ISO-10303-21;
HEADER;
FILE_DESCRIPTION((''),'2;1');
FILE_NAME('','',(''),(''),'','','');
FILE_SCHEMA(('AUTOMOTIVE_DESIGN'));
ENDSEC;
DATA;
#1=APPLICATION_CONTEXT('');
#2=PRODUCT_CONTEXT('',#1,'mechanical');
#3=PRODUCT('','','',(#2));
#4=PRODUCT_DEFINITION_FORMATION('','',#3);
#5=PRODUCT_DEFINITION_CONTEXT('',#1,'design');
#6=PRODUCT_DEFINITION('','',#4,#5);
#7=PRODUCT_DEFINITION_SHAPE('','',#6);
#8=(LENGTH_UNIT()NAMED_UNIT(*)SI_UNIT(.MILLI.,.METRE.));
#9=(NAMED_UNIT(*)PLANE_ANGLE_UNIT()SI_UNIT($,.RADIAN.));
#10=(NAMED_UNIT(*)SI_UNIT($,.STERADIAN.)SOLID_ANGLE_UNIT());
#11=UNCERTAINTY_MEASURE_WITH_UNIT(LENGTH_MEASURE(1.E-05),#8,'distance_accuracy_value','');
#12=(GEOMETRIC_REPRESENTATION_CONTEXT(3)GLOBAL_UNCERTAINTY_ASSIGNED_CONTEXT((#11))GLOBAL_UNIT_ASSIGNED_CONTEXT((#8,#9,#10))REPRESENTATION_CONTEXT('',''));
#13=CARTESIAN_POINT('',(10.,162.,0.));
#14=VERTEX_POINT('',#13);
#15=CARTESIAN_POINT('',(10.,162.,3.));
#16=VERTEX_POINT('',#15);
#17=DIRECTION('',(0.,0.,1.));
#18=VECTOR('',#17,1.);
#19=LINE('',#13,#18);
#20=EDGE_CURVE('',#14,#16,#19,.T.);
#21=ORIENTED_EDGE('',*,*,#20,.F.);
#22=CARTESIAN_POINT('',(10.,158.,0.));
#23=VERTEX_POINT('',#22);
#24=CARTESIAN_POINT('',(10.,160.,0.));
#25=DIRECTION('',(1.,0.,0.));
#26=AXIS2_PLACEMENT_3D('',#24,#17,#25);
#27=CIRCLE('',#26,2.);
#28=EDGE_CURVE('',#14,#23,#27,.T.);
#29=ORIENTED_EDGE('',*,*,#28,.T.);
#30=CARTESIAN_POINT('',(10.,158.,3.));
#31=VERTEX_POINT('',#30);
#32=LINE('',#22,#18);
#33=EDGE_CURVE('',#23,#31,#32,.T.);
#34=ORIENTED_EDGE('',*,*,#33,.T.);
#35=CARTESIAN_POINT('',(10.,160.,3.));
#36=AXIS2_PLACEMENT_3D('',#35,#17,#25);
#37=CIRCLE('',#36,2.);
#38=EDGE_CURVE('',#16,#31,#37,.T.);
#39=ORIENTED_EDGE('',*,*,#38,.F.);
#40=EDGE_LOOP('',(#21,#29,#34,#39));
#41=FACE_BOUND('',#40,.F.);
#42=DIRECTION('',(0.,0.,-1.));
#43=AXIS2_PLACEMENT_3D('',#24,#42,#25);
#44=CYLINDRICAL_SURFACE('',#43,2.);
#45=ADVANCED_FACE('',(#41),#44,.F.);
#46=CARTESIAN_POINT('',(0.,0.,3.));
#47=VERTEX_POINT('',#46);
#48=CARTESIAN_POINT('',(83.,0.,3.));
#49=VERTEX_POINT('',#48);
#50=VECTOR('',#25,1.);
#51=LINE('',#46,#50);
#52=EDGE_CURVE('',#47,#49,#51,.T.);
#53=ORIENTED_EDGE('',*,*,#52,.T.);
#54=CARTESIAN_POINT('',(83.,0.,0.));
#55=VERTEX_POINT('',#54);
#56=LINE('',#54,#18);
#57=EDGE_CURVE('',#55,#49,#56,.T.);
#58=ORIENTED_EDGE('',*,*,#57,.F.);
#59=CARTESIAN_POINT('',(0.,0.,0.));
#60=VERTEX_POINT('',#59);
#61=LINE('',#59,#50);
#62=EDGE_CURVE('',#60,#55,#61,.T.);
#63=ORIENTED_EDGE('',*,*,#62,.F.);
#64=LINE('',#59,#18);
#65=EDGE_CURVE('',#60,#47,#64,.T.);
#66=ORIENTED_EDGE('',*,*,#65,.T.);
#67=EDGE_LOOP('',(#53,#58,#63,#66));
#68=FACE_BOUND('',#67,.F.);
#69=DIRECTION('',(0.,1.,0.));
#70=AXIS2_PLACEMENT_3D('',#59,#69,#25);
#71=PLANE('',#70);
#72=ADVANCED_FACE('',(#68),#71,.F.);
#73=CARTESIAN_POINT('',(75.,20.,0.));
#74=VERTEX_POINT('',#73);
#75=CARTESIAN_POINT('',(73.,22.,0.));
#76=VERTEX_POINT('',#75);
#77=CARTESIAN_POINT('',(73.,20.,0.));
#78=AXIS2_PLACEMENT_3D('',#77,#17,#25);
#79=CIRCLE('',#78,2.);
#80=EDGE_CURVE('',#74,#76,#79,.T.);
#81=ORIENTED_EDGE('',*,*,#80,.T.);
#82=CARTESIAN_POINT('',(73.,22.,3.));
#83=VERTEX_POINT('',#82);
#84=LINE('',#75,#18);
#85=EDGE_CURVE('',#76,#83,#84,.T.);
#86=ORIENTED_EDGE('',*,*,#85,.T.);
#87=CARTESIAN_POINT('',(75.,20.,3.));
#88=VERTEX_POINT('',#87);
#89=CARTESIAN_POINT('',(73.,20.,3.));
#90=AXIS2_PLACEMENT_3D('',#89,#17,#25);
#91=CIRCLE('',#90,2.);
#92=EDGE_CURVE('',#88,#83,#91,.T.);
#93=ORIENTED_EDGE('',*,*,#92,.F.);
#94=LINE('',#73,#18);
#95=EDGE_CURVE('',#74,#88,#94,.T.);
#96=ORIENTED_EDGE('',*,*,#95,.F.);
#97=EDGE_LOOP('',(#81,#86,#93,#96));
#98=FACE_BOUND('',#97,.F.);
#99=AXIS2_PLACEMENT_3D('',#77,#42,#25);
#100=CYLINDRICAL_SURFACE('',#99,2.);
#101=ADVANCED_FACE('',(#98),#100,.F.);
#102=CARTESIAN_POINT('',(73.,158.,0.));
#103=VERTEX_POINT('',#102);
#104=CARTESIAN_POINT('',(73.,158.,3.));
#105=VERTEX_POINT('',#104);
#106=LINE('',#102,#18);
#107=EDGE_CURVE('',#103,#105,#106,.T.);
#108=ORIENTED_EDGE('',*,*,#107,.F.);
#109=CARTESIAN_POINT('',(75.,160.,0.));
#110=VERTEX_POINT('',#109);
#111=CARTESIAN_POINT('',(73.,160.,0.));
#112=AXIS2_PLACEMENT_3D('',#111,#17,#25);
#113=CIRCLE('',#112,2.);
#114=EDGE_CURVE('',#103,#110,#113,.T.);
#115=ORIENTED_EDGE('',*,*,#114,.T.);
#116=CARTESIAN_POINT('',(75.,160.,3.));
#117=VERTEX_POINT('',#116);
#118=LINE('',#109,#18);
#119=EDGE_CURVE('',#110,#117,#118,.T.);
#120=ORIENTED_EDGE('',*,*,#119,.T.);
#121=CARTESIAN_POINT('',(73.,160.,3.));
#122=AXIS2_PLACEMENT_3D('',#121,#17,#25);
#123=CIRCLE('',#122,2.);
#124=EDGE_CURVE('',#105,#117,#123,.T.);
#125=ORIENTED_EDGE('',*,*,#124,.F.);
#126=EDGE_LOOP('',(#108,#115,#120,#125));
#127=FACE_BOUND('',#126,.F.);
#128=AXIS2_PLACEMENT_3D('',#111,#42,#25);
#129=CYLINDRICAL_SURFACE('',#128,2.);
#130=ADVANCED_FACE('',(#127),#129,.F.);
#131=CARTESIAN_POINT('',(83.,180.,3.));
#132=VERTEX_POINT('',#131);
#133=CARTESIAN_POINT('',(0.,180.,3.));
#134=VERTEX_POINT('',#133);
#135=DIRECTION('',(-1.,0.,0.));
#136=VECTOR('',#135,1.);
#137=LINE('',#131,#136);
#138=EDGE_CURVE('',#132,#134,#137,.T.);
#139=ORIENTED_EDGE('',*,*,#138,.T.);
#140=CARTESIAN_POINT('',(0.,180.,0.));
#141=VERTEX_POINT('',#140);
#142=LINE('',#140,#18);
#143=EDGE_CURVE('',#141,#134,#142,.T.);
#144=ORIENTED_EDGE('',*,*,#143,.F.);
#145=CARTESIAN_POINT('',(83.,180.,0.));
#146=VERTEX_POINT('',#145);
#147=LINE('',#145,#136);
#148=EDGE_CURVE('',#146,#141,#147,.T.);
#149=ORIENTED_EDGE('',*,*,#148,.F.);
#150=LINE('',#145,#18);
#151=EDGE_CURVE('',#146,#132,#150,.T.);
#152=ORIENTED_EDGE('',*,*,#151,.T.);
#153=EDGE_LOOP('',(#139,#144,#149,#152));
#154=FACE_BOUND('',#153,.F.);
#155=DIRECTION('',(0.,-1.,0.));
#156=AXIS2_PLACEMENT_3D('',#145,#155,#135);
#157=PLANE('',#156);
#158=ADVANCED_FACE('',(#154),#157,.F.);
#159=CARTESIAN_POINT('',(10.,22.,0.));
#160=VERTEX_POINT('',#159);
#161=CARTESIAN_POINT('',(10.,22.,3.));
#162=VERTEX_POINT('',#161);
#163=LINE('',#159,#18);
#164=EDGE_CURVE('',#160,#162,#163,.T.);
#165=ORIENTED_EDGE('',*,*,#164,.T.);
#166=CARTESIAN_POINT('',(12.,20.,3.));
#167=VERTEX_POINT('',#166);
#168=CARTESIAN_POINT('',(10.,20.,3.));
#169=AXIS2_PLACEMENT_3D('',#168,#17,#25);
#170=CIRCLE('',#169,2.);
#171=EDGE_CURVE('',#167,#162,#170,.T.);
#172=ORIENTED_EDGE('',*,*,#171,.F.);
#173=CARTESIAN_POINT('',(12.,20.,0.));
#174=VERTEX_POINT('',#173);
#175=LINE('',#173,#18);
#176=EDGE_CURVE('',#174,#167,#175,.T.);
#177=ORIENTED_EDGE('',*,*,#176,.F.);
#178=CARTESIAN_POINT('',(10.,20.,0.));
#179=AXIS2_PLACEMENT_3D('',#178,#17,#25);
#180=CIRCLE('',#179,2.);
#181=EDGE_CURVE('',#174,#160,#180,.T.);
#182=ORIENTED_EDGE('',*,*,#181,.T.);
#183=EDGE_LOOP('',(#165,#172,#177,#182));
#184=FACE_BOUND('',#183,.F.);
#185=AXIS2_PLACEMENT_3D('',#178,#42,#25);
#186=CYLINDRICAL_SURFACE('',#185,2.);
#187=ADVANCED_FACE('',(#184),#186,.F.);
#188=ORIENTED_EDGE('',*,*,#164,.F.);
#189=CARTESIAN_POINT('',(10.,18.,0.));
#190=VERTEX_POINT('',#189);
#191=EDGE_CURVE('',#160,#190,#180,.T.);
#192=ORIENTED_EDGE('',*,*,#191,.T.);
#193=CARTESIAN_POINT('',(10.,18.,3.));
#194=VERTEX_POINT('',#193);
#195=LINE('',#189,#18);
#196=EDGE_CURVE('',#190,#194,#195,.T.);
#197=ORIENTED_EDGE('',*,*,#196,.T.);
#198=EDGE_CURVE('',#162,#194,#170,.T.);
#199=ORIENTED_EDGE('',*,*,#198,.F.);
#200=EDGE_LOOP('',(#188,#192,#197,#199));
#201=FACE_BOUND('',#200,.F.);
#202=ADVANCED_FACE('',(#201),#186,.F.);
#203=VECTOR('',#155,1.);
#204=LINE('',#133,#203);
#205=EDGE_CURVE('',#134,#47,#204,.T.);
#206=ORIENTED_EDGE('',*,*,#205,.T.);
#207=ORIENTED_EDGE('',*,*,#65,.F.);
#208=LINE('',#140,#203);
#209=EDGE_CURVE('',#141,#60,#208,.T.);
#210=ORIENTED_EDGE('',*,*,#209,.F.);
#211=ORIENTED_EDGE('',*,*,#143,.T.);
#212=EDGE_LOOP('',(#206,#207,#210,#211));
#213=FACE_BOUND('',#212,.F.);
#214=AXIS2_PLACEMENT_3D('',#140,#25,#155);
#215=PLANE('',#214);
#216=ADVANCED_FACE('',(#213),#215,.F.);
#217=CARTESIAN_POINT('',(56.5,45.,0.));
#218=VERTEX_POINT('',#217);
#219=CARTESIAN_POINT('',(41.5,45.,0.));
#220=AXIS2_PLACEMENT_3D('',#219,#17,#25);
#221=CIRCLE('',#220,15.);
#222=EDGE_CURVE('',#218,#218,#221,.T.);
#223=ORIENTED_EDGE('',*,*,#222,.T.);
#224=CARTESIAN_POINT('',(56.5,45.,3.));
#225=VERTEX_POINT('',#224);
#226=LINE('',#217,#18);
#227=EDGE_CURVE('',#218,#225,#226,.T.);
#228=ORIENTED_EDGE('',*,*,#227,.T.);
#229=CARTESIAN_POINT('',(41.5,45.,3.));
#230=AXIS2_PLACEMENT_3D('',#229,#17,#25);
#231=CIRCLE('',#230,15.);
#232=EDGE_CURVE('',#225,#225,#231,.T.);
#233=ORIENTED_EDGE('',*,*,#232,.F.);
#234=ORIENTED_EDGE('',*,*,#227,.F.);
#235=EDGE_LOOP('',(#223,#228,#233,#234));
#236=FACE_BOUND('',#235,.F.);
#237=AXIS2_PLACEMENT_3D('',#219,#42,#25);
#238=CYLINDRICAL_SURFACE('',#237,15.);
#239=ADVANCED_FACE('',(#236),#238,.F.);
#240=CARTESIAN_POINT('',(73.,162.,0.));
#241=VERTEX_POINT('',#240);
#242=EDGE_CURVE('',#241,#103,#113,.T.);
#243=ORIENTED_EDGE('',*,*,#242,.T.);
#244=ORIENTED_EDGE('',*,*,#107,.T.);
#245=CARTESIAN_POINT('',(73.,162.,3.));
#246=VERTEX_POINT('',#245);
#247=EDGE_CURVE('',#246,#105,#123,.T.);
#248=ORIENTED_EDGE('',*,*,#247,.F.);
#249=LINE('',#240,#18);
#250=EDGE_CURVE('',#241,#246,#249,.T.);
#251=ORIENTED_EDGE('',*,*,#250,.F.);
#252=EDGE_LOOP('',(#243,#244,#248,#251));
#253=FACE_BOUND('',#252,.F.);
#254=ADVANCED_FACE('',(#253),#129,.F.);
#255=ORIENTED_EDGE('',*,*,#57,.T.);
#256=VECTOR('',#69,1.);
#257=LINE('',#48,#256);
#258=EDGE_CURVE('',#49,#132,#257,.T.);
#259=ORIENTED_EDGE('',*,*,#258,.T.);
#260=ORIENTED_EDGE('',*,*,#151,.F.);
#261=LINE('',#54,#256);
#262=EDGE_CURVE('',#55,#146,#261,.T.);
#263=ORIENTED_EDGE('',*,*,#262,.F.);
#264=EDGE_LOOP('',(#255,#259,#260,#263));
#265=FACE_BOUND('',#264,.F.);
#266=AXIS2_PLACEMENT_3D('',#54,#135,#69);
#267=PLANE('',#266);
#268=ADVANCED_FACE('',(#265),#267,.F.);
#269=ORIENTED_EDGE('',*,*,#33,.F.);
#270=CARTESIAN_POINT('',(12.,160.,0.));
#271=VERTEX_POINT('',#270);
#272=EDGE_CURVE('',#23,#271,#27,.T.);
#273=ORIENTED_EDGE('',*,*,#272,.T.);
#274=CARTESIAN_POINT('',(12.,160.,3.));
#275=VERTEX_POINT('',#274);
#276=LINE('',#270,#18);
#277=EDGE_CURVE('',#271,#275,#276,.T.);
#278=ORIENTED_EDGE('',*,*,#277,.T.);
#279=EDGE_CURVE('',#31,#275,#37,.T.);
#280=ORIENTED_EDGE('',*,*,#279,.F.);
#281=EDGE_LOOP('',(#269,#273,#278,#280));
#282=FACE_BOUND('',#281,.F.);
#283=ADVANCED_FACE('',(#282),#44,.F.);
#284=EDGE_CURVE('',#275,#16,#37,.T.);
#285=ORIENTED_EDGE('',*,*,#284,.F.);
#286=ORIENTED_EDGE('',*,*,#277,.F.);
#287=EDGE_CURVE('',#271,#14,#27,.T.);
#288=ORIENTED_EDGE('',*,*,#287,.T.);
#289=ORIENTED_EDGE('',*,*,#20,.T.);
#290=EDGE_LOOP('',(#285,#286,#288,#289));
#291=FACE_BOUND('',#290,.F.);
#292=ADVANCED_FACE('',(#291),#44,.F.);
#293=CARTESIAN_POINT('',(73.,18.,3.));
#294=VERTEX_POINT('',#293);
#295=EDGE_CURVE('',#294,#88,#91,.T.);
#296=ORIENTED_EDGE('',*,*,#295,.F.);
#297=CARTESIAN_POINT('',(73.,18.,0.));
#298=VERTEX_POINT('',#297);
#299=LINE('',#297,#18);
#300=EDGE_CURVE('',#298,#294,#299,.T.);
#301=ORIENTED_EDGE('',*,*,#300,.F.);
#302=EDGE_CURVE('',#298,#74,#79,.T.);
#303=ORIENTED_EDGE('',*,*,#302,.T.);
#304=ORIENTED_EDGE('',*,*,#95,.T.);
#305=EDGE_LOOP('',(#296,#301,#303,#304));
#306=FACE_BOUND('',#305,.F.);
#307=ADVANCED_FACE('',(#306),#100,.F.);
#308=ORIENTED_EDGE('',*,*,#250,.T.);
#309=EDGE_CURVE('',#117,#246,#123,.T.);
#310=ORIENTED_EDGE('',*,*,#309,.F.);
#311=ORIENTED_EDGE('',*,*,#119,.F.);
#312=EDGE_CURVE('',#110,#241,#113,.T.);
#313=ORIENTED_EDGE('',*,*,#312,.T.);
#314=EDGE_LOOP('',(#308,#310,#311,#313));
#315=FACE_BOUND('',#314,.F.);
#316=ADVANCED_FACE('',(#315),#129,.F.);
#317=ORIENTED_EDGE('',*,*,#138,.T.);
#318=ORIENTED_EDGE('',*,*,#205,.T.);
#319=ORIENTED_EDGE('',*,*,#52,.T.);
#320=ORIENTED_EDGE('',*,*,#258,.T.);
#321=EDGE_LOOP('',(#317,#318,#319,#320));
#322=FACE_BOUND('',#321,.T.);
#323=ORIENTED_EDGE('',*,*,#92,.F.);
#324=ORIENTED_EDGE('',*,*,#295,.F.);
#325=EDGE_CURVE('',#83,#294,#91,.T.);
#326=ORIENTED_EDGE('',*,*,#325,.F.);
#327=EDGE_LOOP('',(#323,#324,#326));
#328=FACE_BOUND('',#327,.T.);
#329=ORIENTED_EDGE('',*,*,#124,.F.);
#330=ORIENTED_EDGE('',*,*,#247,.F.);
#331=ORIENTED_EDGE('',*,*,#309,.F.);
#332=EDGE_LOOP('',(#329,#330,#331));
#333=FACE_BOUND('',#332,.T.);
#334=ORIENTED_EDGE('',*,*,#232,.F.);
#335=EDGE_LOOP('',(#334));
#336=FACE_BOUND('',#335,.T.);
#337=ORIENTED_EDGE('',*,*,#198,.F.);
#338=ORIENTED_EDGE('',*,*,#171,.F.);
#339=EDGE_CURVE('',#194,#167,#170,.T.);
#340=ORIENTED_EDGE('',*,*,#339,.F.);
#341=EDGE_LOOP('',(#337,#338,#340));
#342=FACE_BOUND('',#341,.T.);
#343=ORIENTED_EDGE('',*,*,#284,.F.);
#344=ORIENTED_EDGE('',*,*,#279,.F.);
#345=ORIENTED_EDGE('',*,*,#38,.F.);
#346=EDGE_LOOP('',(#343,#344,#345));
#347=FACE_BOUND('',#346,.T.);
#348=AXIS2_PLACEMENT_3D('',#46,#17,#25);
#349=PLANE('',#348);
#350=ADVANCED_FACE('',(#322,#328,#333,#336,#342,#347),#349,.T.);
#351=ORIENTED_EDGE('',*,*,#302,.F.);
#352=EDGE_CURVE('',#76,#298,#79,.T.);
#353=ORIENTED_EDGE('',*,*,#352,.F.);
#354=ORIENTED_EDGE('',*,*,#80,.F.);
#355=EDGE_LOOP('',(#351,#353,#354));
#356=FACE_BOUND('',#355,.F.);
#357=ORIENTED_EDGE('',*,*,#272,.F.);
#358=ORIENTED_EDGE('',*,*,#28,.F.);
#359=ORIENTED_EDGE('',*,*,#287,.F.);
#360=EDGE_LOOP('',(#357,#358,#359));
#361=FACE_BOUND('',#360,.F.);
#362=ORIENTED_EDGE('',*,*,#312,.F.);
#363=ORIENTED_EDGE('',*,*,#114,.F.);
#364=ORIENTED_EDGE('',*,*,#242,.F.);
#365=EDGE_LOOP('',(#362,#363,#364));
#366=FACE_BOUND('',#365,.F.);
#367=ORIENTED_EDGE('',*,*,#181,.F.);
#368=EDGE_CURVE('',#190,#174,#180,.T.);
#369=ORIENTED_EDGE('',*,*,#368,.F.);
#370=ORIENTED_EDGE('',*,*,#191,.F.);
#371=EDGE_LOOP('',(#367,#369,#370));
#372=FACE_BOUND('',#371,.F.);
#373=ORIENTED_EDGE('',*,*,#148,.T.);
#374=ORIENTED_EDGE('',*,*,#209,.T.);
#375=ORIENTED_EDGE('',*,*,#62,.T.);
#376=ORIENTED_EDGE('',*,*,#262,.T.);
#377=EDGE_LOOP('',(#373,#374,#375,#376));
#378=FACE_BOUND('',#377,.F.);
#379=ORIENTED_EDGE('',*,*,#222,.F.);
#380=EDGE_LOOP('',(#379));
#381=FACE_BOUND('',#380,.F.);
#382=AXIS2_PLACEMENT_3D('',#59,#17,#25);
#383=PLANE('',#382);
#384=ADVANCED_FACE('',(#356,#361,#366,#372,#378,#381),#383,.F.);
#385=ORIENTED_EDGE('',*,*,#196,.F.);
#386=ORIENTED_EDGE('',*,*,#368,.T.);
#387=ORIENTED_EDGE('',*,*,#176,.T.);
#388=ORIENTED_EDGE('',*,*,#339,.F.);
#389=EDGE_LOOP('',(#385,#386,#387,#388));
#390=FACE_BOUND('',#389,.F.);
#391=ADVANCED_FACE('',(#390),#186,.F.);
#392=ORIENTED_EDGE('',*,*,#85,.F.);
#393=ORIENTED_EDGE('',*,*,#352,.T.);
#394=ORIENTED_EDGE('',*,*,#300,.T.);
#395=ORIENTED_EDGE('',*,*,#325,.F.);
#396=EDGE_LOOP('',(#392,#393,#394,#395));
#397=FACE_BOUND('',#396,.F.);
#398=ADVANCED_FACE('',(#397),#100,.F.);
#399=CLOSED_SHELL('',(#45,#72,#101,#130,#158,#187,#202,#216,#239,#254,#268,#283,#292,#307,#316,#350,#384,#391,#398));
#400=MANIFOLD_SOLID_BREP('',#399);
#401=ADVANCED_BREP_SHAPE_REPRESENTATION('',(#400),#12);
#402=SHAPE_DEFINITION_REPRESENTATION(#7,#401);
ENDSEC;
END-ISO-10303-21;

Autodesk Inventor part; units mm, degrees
ref_plane "YZ Plane" through (0, 0, 0) normal (1, 0, 0) x (0, 1, 0)
ref_plane "XZ Plane" through (0, 0, 0) normal (0, 1, 0) x (-1, 0, 0)
ref_plane "XY Plane" through (0, 0, 0) normal (0, 0, 1) x (1, 0, 0)
sketch "Sketch1" plane through (0, 0, 0) normal (0, 0, 1) x (1, 0, 0)
  line L0 (83, 0) -> (83, 180)
  line L1 (83, 180) -> (0, 180)
  line L2 (0, 180) -> (0, 0)
  circle A0 centre (41.5, 45) radius 15
  line L3 (0, 0) -> (83, 0)
  line L4 (10, 171.8151) -> (10, 9.9445)
  line L5 (73, 174.9264) -> (73, 13.0559)
  circle A1 centre (10, 160) radius 2
  circle A2 centre (73, 160) radius 2
  circle A3 centre (10, 20) radius 2
  circle A4 centre (73, 20) radius 2
  dimension "d0" = 83
  dimension "d1" = 180
  dimension "d4" = 30
  dimension "d5" = 41.5
  dimension "d10" = 10
  dimension "d11" = 10
  dimension "d12" = 4
  dimension "d13" = 20
  dimension "d14" = 20
  dimension "d15" = 20
  dimension "d16" = 20
  dimension "d17" = 4
  dimension "d18" = 4
  dimension "d19" = 4
extrude "Extrusion1" add sketch "Sketch1" along normal blind 3
equation "\"d5\" = 0.5 * d0"
equation "\"d11\" = d10"
equation "\"d14\" = d13"
equation "\"d15\" = d13"
equation "\"d16\" = d13"
equation "\"d17\" = d12"
equation "\"d18\" = d12"
equation "\"d19\" = d18"
equation "\"d6\" = 0.25 * d1"
properties part number "BaseC_3" material "PMMA Plastic"
